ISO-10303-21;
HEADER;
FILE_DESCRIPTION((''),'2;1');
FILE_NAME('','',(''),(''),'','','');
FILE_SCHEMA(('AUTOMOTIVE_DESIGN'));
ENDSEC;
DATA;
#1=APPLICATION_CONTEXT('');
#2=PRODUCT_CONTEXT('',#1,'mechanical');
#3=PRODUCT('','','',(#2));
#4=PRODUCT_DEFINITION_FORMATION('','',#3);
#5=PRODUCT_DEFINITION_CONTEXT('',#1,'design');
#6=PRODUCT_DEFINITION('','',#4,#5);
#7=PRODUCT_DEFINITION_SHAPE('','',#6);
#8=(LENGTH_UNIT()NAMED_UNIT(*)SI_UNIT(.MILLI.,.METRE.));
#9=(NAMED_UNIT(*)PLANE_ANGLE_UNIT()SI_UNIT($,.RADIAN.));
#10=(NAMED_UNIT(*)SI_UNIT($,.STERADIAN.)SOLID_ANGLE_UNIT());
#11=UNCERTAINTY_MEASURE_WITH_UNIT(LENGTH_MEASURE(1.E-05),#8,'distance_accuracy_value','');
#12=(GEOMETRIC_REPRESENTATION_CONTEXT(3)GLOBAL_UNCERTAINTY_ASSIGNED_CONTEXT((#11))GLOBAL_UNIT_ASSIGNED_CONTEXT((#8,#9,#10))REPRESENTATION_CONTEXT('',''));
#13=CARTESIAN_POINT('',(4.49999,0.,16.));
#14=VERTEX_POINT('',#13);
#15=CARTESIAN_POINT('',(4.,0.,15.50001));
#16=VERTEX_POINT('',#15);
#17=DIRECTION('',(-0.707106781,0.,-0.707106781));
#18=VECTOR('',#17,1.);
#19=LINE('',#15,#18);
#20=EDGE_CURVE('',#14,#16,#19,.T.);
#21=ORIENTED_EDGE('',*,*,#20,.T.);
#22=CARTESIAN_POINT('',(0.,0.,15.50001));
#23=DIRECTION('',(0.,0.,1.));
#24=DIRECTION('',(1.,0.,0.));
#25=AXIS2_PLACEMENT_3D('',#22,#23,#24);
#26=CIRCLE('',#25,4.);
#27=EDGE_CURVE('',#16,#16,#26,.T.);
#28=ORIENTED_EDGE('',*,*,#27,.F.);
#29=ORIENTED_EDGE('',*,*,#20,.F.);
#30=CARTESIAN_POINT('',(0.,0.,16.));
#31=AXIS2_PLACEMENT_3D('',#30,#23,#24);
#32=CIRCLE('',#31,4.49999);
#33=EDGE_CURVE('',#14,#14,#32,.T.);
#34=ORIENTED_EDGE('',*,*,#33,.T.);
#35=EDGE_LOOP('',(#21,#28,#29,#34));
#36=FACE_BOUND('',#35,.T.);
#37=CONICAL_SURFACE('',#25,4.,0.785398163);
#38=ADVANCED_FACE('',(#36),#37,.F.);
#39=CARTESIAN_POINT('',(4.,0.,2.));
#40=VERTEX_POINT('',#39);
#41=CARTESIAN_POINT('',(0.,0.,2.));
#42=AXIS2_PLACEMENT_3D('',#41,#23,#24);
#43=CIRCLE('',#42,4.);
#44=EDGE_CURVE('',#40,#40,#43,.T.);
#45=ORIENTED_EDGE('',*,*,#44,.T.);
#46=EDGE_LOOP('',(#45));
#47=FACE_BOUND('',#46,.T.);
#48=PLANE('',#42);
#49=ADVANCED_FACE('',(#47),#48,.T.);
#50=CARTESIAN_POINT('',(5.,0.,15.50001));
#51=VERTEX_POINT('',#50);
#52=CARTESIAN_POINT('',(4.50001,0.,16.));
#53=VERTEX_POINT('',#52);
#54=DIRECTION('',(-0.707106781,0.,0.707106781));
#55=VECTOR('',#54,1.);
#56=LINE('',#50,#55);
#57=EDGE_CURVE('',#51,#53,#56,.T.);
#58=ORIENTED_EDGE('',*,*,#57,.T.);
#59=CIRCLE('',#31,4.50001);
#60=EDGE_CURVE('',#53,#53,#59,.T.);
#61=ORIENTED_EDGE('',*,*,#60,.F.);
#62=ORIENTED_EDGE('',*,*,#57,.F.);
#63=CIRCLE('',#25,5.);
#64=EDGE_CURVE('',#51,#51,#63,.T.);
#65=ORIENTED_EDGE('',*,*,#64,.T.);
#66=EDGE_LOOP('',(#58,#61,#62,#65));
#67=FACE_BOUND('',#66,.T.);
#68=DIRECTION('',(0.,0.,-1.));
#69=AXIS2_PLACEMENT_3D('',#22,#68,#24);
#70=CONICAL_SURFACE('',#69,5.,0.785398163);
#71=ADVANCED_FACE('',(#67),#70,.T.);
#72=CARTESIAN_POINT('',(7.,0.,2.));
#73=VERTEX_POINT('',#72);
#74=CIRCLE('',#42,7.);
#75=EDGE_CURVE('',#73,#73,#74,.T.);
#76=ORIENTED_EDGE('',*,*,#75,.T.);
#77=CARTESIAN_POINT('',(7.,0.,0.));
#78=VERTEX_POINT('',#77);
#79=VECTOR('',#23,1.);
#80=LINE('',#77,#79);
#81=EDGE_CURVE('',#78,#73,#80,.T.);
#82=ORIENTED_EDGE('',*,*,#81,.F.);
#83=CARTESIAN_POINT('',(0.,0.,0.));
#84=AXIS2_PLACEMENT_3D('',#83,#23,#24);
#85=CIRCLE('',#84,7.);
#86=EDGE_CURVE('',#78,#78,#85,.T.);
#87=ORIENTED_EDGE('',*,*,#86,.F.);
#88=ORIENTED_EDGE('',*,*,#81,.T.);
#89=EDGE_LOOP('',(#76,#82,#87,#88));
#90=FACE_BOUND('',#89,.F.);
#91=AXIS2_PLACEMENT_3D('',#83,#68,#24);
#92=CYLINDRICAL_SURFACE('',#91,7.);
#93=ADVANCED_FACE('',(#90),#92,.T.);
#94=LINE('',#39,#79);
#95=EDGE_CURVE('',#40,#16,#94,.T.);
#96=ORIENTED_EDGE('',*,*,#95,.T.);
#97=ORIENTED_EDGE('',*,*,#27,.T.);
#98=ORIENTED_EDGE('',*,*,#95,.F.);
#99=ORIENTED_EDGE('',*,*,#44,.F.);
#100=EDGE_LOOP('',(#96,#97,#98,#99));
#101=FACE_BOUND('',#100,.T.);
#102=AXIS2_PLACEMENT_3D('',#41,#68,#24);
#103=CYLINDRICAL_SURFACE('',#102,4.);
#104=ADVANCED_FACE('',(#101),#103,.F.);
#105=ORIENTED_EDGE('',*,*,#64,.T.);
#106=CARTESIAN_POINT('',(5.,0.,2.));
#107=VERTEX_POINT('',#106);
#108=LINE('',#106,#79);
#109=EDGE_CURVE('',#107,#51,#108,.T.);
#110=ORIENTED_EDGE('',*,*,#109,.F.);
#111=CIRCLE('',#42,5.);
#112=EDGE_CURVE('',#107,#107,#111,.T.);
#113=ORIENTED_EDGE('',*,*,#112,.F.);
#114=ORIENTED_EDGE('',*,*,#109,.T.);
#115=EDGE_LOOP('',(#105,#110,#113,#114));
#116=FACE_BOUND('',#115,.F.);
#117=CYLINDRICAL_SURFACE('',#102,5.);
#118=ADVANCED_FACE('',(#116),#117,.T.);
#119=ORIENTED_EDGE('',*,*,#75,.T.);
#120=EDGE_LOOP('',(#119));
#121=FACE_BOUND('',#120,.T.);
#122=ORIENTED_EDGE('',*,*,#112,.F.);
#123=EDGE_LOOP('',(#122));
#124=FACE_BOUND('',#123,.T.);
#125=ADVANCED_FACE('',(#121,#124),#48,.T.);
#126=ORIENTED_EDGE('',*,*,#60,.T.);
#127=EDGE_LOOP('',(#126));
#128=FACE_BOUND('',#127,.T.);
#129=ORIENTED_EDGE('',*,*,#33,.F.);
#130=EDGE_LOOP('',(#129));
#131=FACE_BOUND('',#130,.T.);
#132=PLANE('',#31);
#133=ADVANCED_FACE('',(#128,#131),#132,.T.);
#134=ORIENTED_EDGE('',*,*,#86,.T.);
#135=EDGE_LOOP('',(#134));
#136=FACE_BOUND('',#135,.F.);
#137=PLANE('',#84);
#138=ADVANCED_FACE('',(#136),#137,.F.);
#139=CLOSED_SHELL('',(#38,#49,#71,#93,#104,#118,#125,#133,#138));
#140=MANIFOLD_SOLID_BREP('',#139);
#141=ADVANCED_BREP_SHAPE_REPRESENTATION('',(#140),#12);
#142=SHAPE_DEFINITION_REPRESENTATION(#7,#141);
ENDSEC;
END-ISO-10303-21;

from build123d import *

# Parameters (mm, degrees)
F0_R     = 7
F1_DEPTH = 2
F2_R     = 5
F2_R_2   = 4
F3_DEPTH = 14
F4_SIZE  = 0.49999


# Not quite as in the source:
# - a fillet or chamfer is up to 0.001 mm smaller than in the source, because OpenCascade refuses the exact size


with BuildPart() as f1:
    # F0 (on Top) → F1 (new body)
    with BuildSketch(Plane.XY):
        Circle(F0_R)
    extrude(amount=F1_DEPTH)

    # F2 (on face) → F3 (join)
    with BuildSketch(Plane.XY.offset(2)):
        Circle(F2_R)
        Circle(F2_R_2, mode=Mode.SUBTRACT)
    extrude(amount=F3_DEPTH)

    # F4 (size 0.5 in the source; OpenCascade refuses exactly that, so slightly less here)
    f4_edges = [f1.edges().sort_by_distance(p)[0] for p in [
        (-5, 0, 16),
        (-4, 0, 16),
    ]]
    chamfer(f4_edges, length=F4_SIZE)


solid = f1.part
